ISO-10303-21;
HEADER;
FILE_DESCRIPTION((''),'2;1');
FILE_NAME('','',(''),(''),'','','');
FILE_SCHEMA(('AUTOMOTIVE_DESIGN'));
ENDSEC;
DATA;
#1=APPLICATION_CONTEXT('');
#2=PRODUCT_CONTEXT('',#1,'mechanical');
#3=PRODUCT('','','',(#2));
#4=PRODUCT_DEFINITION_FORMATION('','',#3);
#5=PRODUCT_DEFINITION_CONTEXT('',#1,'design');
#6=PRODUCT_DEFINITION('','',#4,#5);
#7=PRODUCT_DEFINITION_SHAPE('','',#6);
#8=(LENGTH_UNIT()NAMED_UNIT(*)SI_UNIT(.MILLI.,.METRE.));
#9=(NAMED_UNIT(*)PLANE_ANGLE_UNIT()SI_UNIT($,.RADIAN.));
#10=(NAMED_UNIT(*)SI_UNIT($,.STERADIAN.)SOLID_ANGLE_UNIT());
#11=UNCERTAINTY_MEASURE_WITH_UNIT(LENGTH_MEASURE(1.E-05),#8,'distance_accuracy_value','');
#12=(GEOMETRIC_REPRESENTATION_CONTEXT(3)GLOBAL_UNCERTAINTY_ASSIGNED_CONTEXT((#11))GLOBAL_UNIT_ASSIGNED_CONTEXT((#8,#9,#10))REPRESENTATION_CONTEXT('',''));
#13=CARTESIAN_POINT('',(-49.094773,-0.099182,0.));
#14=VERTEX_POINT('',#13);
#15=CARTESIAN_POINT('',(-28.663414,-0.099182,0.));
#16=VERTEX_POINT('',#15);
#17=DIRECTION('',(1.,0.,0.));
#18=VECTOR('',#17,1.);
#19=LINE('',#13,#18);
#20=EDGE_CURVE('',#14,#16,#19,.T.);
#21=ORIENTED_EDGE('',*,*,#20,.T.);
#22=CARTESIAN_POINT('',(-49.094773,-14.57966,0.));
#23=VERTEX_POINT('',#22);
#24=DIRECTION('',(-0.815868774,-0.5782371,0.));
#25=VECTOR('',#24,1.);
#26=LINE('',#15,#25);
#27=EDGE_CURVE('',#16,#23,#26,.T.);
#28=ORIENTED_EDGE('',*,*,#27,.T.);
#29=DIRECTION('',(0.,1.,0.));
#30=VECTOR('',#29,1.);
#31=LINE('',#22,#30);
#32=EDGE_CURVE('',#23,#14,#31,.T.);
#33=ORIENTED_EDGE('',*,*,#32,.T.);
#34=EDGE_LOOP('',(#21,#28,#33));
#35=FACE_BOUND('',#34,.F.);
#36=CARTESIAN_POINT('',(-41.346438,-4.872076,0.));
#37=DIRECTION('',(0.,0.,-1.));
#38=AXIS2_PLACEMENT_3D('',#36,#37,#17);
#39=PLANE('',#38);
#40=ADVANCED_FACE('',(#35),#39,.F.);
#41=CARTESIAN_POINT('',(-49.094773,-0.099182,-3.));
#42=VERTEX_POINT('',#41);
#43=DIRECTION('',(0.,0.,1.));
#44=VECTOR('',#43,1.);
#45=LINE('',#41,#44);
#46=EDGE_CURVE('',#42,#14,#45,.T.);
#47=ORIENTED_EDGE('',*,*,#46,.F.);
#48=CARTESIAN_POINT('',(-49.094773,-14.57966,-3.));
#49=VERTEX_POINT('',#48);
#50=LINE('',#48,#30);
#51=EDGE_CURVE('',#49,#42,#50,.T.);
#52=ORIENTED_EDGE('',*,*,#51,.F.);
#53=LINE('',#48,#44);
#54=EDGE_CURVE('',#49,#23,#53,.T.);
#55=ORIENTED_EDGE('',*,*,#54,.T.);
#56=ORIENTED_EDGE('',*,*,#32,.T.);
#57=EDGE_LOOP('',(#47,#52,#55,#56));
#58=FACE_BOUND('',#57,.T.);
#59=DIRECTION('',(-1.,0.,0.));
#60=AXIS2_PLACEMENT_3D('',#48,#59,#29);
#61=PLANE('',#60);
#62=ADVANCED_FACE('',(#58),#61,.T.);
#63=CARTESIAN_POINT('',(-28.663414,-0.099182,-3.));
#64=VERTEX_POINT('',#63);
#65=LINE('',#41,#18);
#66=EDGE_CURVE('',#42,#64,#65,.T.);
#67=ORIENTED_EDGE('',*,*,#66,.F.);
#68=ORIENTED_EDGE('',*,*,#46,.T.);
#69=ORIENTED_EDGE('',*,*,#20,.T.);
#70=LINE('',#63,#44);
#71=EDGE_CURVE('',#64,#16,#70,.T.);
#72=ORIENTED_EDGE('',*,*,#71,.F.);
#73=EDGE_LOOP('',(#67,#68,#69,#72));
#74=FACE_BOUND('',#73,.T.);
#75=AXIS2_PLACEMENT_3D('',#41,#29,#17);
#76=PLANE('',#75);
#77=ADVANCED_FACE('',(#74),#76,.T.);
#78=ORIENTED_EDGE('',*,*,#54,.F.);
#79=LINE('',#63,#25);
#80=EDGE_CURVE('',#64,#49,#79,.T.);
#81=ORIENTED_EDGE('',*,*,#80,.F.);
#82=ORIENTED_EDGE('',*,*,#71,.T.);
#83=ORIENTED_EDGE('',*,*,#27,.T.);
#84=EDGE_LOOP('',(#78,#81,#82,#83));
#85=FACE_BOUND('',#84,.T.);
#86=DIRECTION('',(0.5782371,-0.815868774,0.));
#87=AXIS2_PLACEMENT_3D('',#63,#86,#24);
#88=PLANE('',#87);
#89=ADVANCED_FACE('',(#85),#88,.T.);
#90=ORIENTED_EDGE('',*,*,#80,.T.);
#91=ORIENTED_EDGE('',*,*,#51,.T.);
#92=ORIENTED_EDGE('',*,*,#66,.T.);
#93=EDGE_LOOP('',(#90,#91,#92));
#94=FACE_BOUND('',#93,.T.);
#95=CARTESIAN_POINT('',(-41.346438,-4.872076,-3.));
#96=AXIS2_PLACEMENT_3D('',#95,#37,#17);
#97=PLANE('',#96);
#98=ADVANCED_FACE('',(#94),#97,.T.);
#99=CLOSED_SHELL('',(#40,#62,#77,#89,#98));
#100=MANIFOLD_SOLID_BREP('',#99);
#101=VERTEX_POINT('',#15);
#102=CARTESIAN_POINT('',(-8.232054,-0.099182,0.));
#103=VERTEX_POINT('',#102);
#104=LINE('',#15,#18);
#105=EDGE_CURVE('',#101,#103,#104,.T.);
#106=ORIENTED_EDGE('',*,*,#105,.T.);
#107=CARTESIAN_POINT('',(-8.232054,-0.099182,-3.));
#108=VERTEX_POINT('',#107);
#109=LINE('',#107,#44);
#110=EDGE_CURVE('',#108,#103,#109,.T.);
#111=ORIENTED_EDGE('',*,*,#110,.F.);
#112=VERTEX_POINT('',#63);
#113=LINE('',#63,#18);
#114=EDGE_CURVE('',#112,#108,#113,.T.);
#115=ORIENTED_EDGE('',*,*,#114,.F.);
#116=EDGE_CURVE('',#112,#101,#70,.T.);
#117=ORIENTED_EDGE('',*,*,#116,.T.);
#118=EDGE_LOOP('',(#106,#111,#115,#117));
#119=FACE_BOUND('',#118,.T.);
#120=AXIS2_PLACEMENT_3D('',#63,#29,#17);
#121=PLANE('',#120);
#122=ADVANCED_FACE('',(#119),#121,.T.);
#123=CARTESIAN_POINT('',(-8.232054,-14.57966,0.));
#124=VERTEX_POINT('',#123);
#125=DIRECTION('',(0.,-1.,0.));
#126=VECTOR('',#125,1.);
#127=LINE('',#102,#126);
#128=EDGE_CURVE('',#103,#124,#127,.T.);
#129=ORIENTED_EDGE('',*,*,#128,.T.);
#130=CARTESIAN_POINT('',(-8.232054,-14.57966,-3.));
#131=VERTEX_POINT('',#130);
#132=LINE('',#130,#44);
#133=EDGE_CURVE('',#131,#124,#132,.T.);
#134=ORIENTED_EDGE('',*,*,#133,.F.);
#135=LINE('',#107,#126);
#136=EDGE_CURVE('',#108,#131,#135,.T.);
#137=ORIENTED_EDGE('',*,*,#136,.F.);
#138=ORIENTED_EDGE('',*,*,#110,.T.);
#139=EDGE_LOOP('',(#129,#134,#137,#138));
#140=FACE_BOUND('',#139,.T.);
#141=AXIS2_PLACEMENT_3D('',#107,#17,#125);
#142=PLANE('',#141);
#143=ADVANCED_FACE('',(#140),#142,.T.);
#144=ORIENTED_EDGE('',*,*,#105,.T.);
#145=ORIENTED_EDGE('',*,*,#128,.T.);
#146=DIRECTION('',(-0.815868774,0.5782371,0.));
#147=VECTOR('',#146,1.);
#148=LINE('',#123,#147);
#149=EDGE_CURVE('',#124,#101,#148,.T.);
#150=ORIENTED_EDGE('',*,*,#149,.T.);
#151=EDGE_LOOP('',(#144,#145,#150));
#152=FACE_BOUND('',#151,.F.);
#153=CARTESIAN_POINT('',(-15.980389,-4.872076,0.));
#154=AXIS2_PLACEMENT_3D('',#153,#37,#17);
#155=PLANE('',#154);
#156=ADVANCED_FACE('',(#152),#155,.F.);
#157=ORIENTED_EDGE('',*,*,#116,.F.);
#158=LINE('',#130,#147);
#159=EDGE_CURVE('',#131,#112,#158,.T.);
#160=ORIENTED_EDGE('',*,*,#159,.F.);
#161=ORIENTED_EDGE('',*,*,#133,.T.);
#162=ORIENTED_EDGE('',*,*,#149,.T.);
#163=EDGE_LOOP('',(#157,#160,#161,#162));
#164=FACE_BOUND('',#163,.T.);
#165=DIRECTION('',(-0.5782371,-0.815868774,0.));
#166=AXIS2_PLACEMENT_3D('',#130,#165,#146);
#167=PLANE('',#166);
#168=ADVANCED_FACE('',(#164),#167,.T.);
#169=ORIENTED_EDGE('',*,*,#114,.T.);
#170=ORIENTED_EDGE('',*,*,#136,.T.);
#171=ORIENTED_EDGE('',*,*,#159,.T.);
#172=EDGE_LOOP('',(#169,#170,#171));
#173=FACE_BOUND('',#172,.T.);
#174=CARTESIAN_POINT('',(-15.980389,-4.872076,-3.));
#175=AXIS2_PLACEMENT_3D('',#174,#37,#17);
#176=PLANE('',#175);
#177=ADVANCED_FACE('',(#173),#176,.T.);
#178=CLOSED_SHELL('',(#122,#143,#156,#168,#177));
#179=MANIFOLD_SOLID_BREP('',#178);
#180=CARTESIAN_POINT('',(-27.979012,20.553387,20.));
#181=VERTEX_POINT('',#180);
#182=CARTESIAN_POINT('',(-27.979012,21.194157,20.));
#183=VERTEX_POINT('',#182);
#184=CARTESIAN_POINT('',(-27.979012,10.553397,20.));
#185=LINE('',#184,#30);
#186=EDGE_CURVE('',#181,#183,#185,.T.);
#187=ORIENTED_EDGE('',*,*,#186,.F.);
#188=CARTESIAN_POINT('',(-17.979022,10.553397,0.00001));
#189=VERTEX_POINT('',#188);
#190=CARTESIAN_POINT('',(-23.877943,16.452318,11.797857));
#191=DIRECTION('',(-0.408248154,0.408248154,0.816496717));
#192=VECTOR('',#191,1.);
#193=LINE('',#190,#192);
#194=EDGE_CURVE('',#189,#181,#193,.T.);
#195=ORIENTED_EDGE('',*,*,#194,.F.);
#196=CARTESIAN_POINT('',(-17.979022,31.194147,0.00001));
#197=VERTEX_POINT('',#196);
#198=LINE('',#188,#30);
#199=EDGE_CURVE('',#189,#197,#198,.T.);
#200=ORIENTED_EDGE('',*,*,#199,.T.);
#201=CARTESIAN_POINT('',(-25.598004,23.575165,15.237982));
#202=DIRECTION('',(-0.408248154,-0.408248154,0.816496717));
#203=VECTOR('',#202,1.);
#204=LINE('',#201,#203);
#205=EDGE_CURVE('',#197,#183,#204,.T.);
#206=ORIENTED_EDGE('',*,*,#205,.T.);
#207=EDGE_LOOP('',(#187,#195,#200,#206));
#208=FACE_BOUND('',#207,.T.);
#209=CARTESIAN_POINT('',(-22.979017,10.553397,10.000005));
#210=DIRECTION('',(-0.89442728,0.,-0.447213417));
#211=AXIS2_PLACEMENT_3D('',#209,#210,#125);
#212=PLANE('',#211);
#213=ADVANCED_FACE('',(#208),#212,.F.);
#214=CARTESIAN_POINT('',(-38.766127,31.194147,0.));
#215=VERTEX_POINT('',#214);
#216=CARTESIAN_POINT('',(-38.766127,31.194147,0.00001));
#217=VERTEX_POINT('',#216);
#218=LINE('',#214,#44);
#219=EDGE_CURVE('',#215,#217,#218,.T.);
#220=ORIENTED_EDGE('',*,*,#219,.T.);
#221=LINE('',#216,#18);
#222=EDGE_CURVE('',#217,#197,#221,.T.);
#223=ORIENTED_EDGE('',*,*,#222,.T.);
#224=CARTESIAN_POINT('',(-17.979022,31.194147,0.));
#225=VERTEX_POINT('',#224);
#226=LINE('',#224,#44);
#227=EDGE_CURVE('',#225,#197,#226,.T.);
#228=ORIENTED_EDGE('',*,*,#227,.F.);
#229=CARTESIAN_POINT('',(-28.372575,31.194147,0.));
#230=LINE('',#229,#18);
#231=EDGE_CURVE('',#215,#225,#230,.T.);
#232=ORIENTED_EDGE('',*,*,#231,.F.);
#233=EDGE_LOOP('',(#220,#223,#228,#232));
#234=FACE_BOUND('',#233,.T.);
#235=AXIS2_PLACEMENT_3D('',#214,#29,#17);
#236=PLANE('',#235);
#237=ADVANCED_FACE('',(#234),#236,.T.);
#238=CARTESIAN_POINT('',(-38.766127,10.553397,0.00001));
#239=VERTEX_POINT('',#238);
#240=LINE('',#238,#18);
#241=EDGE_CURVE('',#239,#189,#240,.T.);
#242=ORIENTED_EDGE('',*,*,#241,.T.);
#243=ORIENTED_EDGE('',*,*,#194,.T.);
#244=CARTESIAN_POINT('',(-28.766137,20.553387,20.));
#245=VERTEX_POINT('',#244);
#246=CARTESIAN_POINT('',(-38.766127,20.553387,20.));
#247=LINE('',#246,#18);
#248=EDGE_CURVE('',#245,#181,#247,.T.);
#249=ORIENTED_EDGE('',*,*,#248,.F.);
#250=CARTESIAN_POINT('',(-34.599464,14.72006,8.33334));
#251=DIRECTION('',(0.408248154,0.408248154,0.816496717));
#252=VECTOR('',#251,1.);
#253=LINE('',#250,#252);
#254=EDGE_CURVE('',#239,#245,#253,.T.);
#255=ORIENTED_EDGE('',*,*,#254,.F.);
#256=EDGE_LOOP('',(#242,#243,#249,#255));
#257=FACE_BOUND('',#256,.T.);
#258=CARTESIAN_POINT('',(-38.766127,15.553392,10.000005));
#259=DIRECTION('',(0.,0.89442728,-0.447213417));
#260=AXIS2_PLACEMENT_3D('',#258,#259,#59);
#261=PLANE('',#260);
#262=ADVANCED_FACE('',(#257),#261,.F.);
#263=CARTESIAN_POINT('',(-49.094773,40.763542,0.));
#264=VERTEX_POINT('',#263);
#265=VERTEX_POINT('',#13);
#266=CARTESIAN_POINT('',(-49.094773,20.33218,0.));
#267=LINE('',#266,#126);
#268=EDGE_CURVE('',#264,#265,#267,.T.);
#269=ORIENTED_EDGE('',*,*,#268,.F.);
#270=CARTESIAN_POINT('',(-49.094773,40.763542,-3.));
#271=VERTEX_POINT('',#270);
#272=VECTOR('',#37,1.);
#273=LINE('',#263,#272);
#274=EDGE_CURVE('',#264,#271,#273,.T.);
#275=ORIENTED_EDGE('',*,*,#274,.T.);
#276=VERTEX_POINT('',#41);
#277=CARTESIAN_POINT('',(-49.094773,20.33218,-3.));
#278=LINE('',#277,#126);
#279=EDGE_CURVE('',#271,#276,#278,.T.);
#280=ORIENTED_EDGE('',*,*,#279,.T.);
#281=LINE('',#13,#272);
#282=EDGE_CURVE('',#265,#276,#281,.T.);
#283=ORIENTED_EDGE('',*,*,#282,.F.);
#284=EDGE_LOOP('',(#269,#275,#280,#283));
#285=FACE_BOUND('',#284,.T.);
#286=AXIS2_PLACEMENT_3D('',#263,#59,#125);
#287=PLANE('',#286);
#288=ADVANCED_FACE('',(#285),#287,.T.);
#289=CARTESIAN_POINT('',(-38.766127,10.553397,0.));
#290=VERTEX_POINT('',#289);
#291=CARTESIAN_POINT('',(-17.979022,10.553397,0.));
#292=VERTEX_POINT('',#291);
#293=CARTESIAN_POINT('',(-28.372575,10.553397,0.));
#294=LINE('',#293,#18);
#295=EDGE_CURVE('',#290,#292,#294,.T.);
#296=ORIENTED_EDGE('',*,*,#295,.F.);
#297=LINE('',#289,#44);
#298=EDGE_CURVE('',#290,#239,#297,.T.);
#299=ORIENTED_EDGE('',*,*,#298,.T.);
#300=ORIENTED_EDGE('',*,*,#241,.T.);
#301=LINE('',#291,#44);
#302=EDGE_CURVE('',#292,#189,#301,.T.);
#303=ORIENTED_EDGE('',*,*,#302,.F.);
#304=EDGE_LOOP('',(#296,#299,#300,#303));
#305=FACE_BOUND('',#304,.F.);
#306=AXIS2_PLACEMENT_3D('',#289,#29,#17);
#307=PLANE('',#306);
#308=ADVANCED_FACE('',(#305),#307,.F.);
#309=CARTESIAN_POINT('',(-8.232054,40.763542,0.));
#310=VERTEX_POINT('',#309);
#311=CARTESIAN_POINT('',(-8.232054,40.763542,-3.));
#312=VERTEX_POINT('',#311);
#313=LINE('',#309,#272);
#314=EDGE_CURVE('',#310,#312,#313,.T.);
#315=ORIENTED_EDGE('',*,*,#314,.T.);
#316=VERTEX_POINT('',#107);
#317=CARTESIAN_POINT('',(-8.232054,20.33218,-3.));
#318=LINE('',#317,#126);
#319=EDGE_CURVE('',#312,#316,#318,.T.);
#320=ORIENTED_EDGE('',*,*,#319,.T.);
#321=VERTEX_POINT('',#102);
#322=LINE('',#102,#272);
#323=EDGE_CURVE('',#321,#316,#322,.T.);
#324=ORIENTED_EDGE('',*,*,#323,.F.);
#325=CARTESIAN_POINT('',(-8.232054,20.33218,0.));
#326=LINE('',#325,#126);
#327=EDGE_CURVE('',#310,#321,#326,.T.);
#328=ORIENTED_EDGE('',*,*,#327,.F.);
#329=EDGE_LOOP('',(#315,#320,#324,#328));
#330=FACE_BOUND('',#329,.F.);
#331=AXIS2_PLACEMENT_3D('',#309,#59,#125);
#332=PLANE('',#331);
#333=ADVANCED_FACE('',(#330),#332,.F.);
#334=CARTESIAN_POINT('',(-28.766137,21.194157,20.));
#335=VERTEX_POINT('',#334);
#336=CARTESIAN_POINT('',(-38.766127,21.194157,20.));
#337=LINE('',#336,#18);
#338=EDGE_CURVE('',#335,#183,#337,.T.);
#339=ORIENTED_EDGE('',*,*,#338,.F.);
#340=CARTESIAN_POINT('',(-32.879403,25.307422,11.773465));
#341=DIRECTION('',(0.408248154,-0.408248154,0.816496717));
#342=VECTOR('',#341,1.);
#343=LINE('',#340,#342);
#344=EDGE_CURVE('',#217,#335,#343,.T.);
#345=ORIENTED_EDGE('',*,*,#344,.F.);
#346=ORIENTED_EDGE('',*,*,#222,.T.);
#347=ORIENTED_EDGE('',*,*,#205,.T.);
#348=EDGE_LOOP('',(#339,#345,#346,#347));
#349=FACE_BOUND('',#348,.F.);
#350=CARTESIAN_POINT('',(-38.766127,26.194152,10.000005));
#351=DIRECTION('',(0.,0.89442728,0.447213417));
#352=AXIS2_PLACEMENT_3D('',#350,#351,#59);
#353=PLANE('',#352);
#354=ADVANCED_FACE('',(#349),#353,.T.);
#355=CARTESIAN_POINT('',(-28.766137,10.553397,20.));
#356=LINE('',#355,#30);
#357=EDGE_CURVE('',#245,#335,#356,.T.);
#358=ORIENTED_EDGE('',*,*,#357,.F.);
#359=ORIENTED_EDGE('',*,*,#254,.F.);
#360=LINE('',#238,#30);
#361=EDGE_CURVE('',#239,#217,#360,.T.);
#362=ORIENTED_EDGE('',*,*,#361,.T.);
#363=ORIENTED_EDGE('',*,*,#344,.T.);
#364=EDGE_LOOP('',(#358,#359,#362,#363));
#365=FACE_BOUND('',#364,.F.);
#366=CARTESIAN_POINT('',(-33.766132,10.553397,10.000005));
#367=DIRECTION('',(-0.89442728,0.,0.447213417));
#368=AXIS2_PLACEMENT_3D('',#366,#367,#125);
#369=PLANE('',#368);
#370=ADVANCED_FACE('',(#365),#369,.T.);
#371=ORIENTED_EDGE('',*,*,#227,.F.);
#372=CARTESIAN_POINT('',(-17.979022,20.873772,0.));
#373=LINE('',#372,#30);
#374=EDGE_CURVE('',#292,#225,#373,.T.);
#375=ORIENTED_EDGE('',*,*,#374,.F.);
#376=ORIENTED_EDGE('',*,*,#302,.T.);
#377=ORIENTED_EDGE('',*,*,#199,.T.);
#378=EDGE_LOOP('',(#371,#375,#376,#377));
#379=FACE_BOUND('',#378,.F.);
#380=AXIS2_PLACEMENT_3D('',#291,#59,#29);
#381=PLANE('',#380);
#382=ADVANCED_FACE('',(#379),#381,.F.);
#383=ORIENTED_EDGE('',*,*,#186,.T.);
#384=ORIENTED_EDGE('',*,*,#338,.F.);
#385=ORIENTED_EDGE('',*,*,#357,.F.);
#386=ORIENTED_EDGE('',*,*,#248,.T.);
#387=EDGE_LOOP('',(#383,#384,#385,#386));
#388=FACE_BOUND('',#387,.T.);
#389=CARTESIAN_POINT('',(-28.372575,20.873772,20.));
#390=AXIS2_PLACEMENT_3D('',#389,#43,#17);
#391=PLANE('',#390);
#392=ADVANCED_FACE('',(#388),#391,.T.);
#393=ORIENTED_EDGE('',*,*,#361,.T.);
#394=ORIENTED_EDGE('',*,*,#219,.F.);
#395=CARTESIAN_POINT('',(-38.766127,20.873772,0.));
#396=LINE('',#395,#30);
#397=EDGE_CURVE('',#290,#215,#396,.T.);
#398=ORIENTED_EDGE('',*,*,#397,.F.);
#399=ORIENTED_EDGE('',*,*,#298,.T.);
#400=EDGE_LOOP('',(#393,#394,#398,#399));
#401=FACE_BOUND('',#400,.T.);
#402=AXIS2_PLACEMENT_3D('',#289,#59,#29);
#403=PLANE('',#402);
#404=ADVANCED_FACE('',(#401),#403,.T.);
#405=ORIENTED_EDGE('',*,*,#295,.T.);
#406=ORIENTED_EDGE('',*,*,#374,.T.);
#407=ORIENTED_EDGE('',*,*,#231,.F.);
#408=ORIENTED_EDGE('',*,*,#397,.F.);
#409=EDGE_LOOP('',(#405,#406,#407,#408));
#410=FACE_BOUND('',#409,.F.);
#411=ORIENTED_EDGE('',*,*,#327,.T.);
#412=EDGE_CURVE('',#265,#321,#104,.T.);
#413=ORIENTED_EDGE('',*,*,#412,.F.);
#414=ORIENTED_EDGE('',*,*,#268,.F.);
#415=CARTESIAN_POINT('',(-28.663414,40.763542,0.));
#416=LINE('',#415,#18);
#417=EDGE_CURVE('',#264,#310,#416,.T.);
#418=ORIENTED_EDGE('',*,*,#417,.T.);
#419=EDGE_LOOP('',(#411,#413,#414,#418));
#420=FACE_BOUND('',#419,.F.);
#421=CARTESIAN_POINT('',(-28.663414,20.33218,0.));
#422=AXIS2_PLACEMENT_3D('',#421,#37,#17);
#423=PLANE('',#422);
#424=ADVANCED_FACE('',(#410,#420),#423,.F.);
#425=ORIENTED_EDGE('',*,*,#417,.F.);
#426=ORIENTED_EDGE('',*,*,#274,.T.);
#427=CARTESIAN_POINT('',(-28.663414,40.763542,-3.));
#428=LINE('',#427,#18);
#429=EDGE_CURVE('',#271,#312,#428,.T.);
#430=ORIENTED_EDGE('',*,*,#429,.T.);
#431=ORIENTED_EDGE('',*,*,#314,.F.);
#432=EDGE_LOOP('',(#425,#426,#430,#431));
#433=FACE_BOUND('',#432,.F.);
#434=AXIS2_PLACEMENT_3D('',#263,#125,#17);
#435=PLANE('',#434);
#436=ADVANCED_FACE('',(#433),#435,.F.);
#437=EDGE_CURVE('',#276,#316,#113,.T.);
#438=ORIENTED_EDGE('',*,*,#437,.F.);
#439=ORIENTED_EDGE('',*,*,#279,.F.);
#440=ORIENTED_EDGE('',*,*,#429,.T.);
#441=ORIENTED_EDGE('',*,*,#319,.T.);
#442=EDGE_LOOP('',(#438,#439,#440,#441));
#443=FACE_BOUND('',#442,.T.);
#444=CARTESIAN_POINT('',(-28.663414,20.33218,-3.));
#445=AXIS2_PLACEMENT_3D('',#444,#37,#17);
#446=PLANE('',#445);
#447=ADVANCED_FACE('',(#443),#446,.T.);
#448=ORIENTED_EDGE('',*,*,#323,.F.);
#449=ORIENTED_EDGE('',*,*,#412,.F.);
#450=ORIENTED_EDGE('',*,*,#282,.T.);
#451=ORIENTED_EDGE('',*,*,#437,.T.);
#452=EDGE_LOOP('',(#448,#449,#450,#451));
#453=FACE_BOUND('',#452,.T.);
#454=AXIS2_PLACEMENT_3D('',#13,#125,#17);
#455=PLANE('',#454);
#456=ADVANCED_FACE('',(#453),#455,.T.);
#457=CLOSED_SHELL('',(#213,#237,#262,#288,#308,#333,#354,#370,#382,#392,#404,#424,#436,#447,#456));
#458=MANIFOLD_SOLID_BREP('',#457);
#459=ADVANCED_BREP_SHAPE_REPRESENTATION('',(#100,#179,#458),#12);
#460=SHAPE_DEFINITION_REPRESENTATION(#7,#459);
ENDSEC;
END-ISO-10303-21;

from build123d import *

# Parameters (mm, degrees)
F0_W     = 20.7871049643
F0_H     = 20.6407494843
F1_DEPTH = 20
F2_SIZE2 = 9.99999
F2_SIZE  = 19.99999
F3_W     = 40.8627185971
F3_H     = 40.862724185
F4_DEPTH = 3
F6_DEPTH = 3


# Not quite as in the source:
# - a fillet or chamfer is up to 0.001 mm smaller than in the source, because OpenCascade refuses the exact size


with BuildPart() as f1:
    # F0 (on Top) → F1 (new body)
    with BuildSketch(Plane.XY):
        with Locations((-28.3725745976, 20.8737719804)):
            Rectangle(F0_W, F0_H)
    extrude(amount=F1_DEPTH)

    # F2 (size 20 and 10 in the source; OpenCascade refuses exactly that, so slightly less here)
    f2_edges = [f1.edges().sort_by_distance(p)[0] for p in [
        (-17.979022, 20.873772, 20),
        (-38.766127, 20.873772, 20),
        (-28.372575, 10.553397, 20),
        (-28.372575, 31.194147, 20),
    ]]
    chamfer(f2_edges, length=F2_SIZE, length2=F2_SIZE2)

    # F3 (on face) → F4 (join)
    with BuildSketch(Plane(origin=(0, 0, 0), x_dir=(1, 0, 0), z_dir=(0, 0, -1))):
        with Locations((-28.6634135991, -20.3321799636)):
            Rectangle(F3_W, F3_H)
    extrude(amount=F4_DEPTH)


with BuildPart() as f6:
    # F5 (on face) → F6 (new body)
    with BuildSketch(Plane(origin=(0, 0, -3), x_dir=(1, 0, 0), z_dir=(0, 0, -1))):
        Polygon((-49.0947728977, 14.5796602592), (-49.0947728977, 0.0991821289), (-28.6634135991, 0.0991821289), align=None)
    extrude(amount=-F6_DEPTH)


with BuildPart() as f6b:
    # F5 (on face) → F6, piece 2 (new body)
    with BuildSketch(Plane(origin=(0, 0, -3), x_dir=(1, 0, 0), z_dir=(0, 0, -1))):
        Polygon((-8.2320543006, 14.5796602592), (-28.6634135991, 0.0991821289), (-8.2320543006, 0.0991821289), align=None)
    extrude(amount=-F6_DEPTH)


solid = Compound([f1.part, f6.part, f6b.part])
